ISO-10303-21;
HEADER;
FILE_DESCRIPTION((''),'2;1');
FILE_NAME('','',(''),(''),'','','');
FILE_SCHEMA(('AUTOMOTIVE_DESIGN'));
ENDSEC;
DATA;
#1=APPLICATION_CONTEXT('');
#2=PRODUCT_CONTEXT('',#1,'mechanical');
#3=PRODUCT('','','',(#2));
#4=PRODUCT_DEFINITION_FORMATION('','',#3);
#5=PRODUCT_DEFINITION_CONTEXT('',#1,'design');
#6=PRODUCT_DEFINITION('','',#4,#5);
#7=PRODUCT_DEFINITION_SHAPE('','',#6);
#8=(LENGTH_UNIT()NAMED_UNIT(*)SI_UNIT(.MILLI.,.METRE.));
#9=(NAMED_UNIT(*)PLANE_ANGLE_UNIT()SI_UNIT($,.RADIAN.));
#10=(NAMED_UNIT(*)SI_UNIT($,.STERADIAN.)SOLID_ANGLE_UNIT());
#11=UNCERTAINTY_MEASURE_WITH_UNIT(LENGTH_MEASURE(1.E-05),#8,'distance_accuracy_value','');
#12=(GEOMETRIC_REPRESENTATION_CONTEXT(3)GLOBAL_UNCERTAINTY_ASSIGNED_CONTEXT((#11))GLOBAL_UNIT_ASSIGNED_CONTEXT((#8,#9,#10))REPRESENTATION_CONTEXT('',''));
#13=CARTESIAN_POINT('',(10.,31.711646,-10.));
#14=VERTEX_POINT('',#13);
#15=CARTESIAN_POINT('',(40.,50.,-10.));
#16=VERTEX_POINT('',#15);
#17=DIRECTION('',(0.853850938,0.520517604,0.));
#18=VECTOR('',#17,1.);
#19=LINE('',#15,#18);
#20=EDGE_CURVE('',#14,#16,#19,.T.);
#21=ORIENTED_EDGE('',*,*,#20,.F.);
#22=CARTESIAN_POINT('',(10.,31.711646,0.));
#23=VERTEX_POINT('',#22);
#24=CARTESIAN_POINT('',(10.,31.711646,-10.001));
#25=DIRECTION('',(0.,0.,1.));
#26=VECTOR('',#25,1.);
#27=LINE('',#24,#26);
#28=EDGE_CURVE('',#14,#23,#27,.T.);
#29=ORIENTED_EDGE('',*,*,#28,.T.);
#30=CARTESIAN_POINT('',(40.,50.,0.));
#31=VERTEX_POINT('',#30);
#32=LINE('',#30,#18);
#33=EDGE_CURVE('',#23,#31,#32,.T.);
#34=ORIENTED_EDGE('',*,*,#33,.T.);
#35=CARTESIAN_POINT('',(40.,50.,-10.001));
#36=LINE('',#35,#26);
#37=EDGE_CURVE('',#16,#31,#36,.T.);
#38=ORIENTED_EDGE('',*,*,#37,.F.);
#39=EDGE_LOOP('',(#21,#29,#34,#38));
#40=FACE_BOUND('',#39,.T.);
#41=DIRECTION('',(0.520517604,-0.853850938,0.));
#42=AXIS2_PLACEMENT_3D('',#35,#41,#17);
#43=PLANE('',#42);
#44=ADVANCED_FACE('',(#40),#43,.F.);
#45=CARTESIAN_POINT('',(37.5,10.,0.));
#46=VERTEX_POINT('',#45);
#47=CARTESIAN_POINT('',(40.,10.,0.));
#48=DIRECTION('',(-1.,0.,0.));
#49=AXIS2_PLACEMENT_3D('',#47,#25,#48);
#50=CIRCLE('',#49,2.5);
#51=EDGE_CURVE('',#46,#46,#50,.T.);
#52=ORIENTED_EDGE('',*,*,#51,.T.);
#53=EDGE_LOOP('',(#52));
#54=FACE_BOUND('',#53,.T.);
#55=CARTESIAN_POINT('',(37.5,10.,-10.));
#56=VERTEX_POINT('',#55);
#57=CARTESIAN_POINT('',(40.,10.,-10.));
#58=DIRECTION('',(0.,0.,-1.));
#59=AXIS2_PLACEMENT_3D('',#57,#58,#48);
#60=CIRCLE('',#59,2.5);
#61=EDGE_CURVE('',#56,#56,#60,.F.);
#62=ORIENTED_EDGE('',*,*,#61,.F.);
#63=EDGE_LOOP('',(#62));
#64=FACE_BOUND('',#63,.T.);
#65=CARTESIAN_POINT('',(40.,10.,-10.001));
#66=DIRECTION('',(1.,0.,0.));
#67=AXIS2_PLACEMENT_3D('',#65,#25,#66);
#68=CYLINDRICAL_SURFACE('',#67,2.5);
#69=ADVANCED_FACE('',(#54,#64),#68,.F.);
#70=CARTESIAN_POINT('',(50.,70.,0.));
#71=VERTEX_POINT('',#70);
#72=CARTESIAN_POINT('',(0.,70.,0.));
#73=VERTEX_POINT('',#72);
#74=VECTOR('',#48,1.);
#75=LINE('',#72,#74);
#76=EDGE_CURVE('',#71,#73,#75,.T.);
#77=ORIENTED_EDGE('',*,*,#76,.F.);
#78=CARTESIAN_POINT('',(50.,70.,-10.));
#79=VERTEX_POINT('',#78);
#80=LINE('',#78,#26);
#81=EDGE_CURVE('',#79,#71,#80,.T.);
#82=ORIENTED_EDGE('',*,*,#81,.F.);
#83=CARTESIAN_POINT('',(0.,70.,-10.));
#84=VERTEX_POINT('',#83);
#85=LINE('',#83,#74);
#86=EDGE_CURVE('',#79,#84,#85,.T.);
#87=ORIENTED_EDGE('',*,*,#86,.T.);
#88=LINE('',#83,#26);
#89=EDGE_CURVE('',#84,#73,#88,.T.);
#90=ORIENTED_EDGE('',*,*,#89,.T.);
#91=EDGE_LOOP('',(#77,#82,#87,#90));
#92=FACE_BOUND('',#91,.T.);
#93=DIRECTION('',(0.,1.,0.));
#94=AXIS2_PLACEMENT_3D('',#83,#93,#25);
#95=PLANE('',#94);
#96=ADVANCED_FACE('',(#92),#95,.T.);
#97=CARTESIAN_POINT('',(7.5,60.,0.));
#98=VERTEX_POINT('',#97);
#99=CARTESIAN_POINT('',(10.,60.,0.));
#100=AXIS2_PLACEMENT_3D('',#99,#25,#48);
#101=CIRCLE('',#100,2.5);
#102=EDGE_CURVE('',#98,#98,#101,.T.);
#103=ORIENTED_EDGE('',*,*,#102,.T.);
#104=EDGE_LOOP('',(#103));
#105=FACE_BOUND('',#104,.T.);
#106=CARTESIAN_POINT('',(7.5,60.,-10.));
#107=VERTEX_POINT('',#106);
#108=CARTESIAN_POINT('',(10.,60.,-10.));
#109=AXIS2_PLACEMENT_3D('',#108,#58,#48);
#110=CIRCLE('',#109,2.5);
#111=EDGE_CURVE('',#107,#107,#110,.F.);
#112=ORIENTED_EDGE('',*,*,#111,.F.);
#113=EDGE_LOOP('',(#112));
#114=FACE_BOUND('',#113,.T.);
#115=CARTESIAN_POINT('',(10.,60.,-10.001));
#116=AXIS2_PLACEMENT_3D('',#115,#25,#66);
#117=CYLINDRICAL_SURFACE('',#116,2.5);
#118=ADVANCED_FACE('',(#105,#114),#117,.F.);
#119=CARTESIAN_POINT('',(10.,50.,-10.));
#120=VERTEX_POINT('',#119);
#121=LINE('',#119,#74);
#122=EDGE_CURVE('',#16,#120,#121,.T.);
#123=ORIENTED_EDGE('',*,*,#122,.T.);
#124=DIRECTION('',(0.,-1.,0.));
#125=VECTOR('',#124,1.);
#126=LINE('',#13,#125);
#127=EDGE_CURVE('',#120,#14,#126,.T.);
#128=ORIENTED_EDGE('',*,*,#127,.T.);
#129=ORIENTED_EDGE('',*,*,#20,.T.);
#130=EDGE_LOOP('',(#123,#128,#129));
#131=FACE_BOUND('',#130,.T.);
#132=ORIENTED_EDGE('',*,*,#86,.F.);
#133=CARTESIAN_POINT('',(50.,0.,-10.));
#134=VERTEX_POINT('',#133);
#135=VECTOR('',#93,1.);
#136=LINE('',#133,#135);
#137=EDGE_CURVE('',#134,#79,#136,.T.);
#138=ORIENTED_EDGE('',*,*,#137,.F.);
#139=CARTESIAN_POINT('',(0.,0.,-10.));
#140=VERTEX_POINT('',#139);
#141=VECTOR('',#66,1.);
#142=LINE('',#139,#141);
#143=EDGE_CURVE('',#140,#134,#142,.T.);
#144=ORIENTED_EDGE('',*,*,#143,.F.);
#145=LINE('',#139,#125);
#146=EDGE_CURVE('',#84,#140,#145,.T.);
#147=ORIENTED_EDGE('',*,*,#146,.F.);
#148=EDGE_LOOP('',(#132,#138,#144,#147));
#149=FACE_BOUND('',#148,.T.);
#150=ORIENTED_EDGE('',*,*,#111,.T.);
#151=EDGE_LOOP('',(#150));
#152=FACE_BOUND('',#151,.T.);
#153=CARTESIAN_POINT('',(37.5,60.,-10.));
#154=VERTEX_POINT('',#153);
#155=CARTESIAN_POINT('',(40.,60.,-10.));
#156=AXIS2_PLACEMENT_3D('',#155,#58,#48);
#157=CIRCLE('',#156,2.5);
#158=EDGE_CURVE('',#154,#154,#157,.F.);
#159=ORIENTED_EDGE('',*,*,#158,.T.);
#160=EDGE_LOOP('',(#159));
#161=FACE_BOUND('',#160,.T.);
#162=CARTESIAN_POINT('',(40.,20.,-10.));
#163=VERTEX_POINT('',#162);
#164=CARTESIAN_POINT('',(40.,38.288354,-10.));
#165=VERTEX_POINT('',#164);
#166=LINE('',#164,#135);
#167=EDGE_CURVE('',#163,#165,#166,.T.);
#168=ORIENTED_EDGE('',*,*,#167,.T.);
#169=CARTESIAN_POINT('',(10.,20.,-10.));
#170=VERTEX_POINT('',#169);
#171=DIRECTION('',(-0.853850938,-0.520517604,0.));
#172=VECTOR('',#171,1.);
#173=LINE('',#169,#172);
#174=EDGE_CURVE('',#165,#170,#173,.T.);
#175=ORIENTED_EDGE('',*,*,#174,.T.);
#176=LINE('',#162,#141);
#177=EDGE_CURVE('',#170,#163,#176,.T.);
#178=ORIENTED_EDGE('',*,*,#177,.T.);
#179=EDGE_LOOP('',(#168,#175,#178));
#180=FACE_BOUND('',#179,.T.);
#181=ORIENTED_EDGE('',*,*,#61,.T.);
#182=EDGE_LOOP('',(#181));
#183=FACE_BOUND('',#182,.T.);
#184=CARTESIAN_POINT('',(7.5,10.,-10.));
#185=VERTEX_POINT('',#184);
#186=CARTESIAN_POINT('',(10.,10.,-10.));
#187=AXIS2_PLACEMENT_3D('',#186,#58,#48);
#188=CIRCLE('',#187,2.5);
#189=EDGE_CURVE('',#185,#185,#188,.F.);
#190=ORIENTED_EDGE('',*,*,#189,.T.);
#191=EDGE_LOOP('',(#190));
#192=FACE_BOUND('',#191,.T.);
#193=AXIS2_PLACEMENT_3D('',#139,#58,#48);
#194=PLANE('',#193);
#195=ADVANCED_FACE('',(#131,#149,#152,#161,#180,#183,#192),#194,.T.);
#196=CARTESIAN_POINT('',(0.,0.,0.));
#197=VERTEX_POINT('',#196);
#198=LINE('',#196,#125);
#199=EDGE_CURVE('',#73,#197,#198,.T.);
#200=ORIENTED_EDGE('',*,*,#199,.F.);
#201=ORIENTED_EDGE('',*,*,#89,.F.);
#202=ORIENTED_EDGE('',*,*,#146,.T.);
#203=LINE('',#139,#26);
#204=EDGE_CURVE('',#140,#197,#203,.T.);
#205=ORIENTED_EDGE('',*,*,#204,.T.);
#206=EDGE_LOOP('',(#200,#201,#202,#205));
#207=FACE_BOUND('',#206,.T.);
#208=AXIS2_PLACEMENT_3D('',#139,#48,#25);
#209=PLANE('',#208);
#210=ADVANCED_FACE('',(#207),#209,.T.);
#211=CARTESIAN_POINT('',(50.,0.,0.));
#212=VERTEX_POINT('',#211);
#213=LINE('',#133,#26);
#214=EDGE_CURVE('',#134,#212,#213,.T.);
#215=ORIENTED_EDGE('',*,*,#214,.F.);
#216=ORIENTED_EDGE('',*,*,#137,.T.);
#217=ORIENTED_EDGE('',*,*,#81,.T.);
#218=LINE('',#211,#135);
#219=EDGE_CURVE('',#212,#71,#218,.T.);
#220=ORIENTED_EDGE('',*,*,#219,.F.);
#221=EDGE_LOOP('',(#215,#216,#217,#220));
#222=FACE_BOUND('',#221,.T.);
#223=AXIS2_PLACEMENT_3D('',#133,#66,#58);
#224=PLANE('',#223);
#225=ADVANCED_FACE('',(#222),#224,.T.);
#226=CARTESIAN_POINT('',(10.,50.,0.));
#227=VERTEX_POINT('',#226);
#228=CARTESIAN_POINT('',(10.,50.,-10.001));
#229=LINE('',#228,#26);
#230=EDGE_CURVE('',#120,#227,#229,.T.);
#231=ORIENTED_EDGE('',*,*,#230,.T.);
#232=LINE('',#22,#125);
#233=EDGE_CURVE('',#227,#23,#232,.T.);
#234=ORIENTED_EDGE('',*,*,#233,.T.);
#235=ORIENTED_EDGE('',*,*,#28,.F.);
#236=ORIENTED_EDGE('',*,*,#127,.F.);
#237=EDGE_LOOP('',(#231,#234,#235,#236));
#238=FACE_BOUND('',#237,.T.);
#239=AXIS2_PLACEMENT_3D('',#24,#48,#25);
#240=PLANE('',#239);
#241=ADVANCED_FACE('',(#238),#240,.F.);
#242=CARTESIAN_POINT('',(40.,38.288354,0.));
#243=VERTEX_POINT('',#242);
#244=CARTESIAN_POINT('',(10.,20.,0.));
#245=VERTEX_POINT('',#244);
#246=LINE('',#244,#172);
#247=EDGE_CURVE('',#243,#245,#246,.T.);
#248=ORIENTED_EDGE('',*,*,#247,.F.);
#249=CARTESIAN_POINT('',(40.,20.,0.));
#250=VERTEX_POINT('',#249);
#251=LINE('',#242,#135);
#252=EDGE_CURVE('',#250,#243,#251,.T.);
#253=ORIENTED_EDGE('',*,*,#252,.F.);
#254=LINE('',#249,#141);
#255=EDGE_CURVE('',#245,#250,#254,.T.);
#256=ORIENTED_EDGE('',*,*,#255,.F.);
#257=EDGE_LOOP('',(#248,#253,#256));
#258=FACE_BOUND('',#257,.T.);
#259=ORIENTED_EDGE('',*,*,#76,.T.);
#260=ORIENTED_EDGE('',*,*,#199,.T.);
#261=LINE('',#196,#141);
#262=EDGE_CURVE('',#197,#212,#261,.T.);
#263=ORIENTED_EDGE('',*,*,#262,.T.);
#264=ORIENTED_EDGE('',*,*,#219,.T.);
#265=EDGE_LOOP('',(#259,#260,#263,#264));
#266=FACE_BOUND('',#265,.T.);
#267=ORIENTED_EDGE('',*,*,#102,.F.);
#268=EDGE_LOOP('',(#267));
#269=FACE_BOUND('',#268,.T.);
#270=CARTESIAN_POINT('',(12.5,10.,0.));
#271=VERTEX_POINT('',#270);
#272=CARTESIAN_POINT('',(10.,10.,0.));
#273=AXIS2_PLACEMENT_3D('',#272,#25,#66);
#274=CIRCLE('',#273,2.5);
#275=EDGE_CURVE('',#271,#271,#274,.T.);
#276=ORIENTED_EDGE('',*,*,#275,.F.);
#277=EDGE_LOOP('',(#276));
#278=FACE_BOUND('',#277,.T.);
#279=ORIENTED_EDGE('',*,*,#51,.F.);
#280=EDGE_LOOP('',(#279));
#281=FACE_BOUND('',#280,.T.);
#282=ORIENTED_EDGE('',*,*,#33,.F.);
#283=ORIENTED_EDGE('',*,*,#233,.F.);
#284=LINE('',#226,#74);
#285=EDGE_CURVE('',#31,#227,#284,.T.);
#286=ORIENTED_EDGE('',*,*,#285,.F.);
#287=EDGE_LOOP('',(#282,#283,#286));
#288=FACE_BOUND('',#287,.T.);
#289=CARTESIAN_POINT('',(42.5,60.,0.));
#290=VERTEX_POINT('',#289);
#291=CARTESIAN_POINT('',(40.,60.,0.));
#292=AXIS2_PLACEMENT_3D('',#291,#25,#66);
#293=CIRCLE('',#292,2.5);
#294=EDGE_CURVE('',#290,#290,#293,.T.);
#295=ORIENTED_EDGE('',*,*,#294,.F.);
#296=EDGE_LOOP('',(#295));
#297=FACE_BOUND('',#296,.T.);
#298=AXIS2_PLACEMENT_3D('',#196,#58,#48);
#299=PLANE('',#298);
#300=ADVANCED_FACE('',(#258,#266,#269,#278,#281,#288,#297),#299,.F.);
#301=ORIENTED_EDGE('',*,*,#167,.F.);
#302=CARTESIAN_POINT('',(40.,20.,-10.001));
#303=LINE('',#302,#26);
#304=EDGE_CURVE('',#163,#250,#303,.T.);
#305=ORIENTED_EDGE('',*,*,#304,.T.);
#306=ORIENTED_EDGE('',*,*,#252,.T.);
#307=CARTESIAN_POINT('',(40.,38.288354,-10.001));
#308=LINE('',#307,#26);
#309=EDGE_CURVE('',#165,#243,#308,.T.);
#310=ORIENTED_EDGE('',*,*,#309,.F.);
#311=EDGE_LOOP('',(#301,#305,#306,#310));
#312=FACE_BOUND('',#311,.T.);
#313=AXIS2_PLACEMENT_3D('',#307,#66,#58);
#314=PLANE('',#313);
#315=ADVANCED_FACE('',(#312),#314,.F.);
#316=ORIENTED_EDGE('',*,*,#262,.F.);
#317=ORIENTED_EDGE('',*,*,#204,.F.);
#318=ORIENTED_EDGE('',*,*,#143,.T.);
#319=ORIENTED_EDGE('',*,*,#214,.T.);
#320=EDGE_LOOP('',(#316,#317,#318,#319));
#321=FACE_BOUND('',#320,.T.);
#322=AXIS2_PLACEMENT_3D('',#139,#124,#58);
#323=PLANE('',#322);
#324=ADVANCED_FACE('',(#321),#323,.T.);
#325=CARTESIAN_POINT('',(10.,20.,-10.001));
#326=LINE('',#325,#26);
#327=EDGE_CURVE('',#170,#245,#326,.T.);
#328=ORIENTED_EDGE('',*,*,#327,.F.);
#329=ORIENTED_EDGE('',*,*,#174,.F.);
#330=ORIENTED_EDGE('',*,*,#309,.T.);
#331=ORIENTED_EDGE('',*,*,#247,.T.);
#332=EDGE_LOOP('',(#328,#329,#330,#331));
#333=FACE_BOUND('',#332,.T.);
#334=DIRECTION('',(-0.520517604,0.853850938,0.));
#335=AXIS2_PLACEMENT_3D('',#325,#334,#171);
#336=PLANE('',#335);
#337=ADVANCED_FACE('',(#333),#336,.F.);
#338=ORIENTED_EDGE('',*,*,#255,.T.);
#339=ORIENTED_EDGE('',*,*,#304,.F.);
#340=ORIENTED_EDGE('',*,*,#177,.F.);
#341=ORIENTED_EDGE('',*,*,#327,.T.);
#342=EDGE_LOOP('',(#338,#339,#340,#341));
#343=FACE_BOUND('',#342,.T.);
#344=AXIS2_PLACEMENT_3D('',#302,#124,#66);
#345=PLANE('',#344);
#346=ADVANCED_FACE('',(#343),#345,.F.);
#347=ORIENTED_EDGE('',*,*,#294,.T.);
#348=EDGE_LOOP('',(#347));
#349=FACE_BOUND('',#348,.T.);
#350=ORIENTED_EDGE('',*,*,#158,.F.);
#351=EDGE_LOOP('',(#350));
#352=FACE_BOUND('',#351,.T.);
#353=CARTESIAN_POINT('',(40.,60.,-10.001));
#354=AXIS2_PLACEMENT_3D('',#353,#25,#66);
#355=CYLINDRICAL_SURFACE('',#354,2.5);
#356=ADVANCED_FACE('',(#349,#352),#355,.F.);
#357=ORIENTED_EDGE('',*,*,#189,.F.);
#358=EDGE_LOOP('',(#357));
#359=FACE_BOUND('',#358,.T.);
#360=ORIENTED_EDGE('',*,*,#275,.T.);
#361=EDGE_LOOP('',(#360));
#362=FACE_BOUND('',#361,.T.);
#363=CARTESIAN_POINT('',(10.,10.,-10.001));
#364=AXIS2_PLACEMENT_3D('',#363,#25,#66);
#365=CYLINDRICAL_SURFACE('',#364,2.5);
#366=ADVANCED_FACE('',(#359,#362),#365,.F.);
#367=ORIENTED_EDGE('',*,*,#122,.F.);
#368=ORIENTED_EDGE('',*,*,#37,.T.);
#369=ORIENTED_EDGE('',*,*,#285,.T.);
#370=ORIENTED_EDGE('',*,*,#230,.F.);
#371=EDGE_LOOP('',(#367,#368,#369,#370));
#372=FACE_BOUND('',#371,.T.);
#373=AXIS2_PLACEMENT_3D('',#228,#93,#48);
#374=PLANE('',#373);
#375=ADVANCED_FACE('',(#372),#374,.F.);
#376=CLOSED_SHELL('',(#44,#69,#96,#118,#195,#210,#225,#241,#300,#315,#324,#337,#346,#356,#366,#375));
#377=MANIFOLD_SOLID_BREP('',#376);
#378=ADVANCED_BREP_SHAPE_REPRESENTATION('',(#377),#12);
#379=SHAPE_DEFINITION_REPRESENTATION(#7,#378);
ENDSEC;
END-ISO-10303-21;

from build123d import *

# Parameters (mm, degrees)
SKETCH1_W          = 50
SKETCH1_H          = 70
BASE_FLANGE1_DEPTH = 10
CUT_EXTRUDE1_REACH = 88.603
SKETCH6_R          = 2.5


# Sheet-metal steps are written as plain solids
with BuildPart() as part:
    # Sketch1 → Base-Flange1 (new body)
    with BuildSketch(Plane.XY):
        with Locations((25, 35)):
            Rectangle(SKETCH1_W, SKETCH1_H)
    extrude(amount=-BASE_FLANGE1_DEPTH)

    # Sketch6 → Cut-Extrude1 (cut, up to next)
    with BuildSketch(Plane.XY, mode=Mode.PRIVATE) as cut_extrude1_sk1:
        with Locations((40, 60)):
            Circle(SKETCH6_R)
    cut_extrude1_tool1 = extrude(cut_extrude1_sk1.sketch, amount=-CUT_EXTRUDE1_REACH, mode=Mode.PRIVATE) & part.part
    # Sketch6 → Cut-Extrude1 (cut, up to next)
    with BuildSketch(Plane.XY, mode=Mode.PRIVATE) as cut_extrude1_sk2:
        with Locations((10, 10)):
            Circle(SKETCH6_R)
    cut_extrude1_tool2 = extrude(cut_extrude1_sk2.sketch, amount=-CUT_EXTRUDE1_REACH, mode=Mode.PRIVATE) & part.part
    # Sketch6 → Cut-Extrude1 (cut, up to next)
    with BuildSketch(Plane.XY, mode=Mode.PRIVATE) as cut_extrude1_sk3:
        with Locations(Location((10, 60, 0), (0, 0, 180))):
            Circle(SKETCH6_R)
    cut_extrude1_tool3 = extrude(cut_extrude1_sk3.sketch, amount=-CUT_EXTRUDE1_REACH, mode=Mode.PRIVATE) & part.part
    # Sketch6 → Cut-Extrude1 (cut, up to next)
    with BuildSketch(Plane.XY, mode=Mode.PRIVATE) as cut_extrude1_sk4:
        with Locations(Location((40, 10, 0), (0, 0, 180))):
            Circle(SKETCH6_R)
    cut_extrude1_tool4 = extrude(cut_extrude1_sk4.sketch, amount=-CUT_EXTRUDE1_REACH, mode=Mode.PRIVATE) & part.part
    # Sketch6 → Cut-Extrude1 (cut, up to next)
    with BuildSketch(Plane.XY, mode=Mode.PRIVATE) as cut_extrude1_sk5:
        Polygon((40, 38.288353904), (40, 20), (10, 20), align=None)
    cut_extrude1_tool5 = extrude(cut_extrude1_sk5.sketch, amount=-CUT_EXTRUDE1_REACH, mode=Mode.PRIVATE) & part.part
    # Sketch6 → Cut-Extrude1 (cut, up to next)
    with BuildSketch(Plane.XY, mode=Mode.PRIVATE) as cut_extrude1_sk6:
        Polygon((40, 50), (10, 31.711646096), (10, 50), align=None)
    cut_extrude1_tool6 = extrude(cut_extrude1_sk6.sketch, amount=-CUT_EXTRUDE1_REACH, mode=Mode.PRIVATE) & part.part
    add(cut_extrude1_tool1.solids().sort_by_distance((40, 60, 0))[0], mode=Mode.SUBTRACT)
    add(cut_extrude1_tool2.solids().sort_by_distance((10, 10, 0))[0], mode=Mode.SUBTRACT)
    add(cut_extrude1_tool3.solids().sort_by_distance((10, 60, 0))[0], mode=Mode.SUBTRACT)
    add(cut_extrude1_tool4.solids().sort_by_distance((40, 10, 0))[0], mode=Mode.SUBTRACT)
    add(cut_extrude1_tool5.solids().sort_by_distance((30, 26.096118, 0))[0], mode=Mode.SUBTRACT)
    add(cut_extrude1_tool6.solids().sort_by_distance((20, 43.903882, 0))[0], mode=Mode.SUBTRACT)


solid = part.part
